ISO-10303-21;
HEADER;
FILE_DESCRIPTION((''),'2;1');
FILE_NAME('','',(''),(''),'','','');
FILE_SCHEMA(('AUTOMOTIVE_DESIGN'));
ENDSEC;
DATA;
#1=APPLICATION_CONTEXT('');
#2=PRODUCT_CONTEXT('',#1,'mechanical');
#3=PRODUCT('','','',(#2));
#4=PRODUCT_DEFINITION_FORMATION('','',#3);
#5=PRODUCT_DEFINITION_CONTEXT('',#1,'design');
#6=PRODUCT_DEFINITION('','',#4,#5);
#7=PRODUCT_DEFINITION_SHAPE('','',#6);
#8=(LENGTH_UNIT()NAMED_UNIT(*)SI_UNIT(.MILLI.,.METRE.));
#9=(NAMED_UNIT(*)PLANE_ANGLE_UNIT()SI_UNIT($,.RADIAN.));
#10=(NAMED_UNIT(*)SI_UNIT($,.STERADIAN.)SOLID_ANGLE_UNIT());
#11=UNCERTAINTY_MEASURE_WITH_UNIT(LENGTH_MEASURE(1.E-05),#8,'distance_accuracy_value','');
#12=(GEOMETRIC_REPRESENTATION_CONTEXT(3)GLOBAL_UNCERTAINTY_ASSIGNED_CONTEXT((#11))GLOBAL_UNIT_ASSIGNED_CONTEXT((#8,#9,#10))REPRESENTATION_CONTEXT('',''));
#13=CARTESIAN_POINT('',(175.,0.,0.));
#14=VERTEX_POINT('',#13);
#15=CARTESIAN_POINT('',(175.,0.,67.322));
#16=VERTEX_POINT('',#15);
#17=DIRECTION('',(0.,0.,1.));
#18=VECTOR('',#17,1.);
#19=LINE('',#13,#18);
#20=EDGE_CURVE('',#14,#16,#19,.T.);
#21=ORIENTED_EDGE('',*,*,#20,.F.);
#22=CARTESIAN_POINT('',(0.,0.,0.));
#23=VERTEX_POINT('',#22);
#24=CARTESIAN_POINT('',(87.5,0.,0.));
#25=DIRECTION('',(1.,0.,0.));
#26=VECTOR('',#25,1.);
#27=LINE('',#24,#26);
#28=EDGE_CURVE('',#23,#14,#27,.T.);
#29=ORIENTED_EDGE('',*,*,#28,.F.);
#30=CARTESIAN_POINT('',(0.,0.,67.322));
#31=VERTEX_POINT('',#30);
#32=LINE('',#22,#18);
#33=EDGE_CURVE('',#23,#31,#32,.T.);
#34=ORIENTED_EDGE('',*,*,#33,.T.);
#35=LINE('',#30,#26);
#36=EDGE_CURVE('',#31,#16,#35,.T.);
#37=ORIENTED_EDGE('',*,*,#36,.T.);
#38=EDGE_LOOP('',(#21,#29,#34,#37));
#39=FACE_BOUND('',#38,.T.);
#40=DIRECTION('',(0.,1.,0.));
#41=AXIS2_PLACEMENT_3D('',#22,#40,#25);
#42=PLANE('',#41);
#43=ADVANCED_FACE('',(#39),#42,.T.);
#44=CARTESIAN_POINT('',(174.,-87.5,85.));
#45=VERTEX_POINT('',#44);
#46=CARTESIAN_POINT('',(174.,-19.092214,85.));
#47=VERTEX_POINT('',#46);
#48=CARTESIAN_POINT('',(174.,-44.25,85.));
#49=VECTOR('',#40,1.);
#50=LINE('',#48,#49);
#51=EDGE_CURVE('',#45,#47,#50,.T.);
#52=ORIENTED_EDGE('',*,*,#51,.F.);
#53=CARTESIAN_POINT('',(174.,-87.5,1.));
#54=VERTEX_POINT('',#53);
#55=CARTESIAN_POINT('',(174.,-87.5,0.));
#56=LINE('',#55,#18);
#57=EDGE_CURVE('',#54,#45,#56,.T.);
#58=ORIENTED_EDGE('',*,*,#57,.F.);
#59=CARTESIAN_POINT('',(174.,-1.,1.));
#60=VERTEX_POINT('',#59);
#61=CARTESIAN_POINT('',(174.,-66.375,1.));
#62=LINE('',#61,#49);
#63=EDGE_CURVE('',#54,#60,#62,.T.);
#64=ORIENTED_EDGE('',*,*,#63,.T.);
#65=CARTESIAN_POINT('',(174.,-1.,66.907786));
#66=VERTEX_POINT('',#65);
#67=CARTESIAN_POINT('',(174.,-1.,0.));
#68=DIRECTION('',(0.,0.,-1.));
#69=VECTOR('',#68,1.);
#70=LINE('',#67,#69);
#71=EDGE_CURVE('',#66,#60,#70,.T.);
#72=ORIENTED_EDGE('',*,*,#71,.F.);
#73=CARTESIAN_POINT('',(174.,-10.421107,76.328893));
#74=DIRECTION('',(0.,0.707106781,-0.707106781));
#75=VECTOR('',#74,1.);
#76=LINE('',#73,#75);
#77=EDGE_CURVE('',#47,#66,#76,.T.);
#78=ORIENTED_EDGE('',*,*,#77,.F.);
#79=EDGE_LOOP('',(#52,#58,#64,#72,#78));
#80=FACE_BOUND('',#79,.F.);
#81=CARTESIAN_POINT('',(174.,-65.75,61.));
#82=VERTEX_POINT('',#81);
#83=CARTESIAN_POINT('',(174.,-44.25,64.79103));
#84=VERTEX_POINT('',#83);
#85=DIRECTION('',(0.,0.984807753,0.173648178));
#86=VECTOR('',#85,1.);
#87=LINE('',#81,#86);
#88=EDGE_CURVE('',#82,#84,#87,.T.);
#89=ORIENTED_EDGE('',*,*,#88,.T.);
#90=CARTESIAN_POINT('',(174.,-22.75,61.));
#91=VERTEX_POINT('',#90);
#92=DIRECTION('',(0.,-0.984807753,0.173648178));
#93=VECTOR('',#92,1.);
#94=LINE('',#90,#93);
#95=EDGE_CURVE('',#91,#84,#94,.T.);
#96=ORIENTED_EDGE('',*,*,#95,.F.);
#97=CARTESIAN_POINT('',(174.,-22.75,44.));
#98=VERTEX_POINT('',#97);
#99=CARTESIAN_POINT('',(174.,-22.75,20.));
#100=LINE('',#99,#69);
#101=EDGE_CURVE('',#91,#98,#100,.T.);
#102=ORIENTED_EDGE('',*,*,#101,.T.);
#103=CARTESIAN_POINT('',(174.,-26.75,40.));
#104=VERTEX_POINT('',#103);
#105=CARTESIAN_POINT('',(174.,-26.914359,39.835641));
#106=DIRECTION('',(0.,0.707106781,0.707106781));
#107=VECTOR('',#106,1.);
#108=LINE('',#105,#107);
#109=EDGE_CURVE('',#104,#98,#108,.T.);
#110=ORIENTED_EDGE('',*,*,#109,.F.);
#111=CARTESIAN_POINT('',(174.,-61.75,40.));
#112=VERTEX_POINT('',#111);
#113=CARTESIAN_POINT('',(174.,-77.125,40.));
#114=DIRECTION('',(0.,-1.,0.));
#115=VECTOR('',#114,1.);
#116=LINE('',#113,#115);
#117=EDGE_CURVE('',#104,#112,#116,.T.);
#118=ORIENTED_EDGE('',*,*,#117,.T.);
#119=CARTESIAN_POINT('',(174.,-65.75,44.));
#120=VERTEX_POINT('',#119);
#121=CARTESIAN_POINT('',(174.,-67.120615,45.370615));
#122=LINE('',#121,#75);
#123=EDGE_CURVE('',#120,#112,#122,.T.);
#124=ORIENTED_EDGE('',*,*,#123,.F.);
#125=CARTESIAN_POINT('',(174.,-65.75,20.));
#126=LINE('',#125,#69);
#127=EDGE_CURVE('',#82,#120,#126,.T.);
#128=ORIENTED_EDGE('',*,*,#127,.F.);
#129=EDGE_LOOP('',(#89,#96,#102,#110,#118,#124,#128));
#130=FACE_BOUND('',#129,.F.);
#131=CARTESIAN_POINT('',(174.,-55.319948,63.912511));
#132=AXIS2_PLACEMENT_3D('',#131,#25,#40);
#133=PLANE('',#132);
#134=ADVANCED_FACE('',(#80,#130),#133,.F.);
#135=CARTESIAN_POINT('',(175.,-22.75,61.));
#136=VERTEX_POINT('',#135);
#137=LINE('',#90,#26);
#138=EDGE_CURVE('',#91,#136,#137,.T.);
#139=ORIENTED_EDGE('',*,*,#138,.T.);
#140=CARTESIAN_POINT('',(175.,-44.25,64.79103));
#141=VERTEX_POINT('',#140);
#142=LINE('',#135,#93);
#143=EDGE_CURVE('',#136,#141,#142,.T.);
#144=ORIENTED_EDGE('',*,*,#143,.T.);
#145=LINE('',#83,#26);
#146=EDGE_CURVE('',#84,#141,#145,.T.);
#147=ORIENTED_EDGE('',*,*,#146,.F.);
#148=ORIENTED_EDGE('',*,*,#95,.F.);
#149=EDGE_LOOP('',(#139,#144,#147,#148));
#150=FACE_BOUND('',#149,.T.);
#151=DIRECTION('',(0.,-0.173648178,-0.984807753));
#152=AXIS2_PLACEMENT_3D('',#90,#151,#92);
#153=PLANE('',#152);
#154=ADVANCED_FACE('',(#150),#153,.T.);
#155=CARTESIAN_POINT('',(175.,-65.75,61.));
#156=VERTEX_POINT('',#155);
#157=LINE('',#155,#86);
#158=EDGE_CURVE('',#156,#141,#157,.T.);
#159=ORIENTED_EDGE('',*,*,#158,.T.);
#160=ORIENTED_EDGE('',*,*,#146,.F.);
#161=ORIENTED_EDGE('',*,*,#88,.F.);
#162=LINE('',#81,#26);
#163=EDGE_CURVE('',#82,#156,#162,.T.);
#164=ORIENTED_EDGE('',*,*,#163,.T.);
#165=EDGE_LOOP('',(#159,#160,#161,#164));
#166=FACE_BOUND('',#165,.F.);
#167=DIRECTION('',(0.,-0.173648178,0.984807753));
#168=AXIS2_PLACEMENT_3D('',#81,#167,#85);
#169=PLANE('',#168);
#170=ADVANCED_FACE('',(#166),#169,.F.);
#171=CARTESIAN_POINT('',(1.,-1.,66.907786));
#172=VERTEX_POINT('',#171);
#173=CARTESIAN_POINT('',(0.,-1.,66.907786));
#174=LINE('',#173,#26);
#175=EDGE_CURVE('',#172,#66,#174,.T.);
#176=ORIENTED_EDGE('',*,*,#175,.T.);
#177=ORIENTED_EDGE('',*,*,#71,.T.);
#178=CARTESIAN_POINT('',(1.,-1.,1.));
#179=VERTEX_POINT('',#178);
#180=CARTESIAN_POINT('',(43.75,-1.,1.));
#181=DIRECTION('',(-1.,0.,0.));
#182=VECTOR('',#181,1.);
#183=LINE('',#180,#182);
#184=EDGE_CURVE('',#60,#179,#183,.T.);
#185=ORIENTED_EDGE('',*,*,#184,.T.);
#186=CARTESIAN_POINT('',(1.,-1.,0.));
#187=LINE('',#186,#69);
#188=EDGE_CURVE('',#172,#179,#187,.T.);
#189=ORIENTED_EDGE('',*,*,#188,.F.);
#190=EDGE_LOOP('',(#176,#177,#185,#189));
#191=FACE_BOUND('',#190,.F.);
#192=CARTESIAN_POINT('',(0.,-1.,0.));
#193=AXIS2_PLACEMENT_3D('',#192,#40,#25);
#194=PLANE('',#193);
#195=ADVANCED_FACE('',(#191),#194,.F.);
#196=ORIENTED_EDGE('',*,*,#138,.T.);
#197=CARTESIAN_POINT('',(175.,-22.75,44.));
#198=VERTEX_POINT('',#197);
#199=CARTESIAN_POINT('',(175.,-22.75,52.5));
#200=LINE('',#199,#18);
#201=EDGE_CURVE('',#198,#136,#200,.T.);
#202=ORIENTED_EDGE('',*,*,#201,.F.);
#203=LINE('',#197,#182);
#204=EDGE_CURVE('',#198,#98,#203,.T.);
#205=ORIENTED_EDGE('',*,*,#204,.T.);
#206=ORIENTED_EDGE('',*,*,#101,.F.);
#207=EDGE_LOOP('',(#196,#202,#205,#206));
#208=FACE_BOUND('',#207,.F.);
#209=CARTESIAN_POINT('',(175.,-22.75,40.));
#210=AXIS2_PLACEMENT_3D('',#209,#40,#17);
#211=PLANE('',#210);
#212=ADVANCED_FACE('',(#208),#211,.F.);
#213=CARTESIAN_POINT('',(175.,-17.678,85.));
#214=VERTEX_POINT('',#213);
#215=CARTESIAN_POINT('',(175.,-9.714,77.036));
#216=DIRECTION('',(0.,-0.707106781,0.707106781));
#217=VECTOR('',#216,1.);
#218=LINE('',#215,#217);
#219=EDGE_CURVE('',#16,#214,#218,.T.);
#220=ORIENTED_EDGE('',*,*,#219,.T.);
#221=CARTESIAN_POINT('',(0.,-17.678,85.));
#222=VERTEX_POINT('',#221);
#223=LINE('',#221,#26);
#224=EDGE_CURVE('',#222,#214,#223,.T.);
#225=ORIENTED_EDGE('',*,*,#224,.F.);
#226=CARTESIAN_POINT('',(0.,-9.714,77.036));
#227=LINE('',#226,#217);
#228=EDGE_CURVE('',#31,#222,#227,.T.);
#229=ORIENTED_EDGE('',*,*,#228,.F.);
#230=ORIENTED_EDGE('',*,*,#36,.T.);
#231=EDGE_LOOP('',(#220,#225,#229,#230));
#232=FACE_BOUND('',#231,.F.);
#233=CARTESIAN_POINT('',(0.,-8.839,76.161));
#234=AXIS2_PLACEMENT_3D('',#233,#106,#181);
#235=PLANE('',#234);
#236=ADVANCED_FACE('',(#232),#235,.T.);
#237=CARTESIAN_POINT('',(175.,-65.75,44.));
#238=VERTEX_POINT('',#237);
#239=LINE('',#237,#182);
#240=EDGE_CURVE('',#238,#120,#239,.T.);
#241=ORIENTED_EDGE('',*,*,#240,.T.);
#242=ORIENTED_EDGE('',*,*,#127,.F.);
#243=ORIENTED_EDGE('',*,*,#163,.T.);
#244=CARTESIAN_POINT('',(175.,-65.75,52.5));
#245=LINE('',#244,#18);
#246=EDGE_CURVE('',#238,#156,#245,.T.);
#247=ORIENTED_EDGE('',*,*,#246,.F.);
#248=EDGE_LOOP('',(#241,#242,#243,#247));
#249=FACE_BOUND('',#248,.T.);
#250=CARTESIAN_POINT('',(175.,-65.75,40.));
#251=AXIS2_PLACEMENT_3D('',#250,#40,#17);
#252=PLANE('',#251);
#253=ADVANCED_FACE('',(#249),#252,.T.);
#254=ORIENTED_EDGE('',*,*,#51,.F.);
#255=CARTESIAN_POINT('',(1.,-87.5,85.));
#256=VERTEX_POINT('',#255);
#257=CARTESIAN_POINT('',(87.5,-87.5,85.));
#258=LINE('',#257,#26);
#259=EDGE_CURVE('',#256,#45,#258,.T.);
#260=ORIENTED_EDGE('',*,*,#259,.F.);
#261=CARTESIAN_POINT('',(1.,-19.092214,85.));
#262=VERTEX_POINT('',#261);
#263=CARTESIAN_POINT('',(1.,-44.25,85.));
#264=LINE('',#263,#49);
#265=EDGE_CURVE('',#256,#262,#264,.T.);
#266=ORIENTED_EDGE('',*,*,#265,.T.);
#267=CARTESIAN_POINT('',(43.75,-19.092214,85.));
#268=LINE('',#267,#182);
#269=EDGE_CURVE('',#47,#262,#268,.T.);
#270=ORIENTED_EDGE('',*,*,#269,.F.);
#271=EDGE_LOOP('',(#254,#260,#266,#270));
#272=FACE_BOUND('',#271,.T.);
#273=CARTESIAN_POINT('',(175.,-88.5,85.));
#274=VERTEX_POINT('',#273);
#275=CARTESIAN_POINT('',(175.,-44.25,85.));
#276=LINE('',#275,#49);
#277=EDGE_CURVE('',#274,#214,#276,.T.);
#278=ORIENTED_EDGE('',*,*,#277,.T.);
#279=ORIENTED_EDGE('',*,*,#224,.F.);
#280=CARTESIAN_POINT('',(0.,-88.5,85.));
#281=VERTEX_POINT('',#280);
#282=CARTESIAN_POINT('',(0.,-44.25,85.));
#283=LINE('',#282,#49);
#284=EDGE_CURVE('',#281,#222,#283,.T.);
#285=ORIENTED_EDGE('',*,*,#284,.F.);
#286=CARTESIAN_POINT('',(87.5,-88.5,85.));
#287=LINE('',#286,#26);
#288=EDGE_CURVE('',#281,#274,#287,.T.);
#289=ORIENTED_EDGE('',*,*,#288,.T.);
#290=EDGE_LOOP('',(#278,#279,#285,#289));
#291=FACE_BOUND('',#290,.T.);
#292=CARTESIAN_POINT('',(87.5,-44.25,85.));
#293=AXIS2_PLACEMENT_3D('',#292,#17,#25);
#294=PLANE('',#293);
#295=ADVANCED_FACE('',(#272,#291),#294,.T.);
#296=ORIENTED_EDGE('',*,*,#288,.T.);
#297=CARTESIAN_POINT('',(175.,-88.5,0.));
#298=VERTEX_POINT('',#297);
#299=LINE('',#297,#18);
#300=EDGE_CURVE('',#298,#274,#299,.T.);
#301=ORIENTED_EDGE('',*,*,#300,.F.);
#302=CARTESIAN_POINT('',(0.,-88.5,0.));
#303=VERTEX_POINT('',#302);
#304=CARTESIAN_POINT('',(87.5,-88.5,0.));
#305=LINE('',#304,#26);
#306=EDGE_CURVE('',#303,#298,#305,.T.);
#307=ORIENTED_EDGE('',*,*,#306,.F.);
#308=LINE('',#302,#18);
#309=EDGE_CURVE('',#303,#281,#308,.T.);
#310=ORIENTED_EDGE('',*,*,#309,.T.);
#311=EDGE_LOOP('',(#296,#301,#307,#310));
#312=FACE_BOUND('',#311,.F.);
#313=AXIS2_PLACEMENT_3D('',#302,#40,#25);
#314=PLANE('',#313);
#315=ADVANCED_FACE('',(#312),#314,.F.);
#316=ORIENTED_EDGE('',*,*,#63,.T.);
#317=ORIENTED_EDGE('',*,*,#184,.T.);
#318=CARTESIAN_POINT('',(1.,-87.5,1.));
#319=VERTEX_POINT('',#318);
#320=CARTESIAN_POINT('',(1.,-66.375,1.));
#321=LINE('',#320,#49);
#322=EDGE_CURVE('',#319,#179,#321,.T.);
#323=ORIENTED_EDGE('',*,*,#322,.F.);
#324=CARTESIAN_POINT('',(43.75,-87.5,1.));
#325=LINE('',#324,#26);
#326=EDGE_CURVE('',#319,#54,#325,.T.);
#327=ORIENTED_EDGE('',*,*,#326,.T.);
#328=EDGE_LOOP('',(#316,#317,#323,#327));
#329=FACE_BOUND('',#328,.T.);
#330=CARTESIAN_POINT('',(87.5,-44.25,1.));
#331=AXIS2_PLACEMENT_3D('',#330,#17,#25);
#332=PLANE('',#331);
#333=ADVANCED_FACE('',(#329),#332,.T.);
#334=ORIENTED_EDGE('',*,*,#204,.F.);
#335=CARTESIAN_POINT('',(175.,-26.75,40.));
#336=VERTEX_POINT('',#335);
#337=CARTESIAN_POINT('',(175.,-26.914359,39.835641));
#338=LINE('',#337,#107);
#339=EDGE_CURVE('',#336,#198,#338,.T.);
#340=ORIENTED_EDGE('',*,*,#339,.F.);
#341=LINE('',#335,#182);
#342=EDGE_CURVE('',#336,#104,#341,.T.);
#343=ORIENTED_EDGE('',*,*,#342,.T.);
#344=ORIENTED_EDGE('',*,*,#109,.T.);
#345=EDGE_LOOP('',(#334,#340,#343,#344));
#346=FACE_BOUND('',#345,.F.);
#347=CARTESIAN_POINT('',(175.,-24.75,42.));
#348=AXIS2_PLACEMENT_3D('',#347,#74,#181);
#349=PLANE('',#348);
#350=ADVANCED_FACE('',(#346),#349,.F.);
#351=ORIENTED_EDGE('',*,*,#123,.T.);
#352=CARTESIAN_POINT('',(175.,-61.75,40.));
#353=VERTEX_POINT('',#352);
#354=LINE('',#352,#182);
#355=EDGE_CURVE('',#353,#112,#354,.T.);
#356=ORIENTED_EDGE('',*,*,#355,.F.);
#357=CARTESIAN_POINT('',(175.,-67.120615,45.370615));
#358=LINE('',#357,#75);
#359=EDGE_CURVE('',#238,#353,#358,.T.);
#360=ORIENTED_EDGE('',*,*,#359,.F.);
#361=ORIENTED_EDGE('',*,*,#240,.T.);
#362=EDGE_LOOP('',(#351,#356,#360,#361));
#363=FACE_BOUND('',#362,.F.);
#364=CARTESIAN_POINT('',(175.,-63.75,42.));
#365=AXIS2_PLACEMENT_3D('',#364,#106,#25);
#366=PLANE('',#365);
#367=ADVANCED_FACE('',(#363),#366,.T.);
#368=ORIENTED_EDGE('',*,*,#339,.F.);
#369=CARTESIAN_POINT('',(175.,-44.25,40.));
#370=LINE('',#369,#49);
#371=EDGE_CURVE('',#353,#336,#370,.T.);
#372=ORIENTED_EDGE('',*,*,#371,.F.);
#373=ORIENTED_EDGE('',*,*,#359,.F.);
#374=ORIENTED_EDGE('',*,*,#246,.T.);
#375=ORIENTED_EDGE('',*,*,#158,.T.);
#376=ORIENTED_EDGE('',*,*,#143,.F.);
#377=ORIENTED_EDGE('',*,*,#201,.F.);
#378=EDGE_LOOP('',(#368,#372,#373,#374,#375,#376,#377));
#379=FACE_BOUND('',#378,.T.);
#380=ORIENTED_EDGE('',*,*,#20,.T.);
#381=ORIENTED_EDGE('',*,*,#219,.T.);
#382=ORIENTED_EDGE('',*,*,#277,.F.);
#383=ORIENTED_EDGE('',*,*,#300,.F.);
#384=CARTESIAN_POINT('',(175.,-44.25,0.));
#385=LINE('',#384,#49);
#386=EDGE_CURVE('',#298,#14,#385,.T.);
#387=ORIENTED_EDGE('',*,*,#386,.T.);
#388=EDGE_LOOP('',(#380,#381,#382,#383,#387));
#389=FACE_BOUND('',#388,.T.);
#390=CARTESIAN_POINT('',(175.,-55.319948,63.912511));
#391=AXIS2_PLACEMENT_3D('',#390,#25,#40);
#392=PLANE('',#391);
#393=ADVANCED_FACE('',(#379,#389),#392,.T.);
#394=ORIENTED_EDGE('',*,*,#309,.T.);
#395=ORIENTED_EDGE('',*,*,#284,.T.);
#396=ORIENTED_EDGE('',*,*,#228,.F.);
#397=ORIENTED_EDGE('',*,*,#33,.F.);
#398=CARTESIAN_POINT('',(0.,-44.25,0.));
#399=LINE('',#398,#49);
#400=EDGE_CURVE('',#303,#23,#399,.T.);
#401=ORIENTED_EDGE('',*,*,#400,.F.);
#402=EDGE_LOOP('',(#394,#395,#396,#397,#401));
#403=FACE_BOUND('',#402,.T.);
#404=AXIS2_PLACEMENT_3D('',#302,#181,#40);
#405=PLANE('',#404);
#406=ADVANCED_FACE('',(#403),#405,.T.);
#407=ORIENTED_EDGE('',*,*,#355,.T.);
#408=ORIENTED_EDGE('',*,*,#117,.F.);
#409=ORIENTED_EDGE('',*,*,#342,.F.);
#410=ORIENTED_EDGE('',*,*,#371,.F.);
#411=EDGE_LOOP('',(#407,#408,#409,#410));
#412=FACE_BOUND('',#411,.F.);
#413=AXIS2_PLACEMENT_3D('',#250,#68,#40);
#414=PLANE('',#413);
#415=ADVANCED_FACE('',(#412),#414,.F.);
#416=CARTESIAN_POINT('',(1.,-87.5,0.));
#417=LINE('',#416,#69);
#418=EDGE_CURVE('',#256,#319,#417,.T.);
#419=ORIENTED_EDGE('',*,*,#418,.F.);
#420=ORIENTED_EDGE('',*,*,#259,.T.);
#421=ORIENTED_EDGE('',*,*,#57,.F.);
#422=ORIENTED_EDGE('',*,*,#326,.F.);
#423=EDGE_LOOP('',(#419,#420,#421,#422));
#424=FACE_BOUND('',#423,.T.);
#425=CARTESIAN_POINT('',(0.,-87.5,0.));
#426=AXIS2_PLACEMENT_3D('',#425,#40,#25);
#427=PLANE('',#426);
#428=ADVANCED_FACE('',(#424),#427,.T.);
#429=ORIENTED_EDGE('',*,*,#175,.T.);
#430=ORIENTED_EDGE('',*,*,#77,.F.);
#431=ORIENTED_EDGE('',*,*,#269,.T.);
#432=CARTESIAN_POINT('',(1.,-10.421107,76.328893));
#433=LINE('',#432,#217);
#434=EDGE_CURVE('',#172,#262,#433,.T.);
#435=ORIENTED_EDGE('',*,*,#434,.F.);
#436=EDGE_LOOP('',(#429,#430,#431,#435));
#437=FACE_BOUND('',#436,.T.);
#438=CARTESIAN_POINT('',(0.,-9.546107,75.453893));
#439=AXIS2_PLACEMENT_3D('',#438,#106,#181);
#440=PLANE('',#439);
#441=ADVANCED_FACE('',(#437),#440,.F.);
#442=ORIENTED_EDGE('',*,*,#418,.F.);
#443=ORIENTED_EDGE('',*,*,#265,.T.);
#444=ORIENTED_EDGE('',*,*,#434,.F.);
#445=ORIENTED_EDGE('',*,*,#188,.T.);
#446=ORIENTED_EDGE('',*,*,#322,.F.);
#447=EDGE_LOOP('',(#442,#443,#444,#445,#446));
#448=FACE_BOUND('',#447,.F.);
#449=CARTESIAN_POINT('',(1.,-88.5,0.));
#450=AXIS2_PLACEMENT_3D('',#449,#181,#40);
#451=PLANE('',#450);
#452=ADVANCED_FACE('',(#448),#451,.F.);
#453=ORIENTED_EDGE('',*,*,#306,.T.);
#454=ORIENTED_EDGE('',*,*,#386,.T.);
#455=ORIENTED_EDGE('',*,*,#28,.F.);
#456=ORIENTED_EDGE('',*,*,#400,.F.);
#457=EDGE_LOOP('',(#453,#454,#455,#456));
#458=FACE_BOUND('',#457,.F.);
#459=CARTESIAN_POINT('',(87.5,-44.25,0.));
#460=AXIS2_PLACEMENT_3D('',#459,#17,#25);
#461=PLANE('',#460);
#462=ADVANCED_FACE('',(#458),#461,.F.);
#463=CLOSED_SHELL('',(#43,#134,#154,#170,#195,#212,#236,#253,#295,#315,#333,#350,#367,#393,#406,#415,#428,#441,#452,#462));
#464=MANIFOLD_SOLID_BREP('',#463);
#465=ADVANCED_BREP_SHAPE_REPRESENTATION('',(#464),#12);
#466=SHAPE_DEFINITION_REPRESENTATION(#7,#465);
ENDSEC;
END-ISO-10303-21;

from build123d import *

# Parameters (mm, degrees)
F0_W        = 175
F0_H        = 88.5
F1_DEPTH    = 85
F2_SIZE     = 17.678
F3_T        = -1
F4_W        = 43
F4_H        = 25
F5_DEPTH    = 2
F6_T1_DEPTH = 1
F7_SIZE     = 4


# Not quite as in the source:
# - a fillet or chamfer that OpenCascade refuses, or shapes differently, is made with other operations: its cross-section is extruded or revolved along the edge and cut away or added


with BuildPart() as f1:
    # F0 (on Top) → F1 (new body)
    with BuildSketch(Plane.XY):
        with Locations((87.5, -44.25)):
            Rectangle(F0_W, F0_H)
    extrude(amount=F1_DEPTH)

    # F2
    f2_edges = [f1.edges().sort_by_distance(p)[0] for p in [
        (87.5, 0, 85),
    ]]
    chamfer(f2_edges, length=F2_SIZE)

    # F3
    f3_openings = [f1.faces().sort_by_distance(p)[0] for p in [
        (87.5, -53.089, 85),
    ]]
    offset(amount=F3_T, openings=f3_openings)

    # F4 (on face) → F5 (cut)
    with BuildSketch(Plane.YZ.offset(175)):
        with Locations((-44.25, 52.5)):
            Rectangle(F4_W, F4_H)
    extrude(amount=-F5_DEPTH, mode=Mode.SUBTRACT)

    # F6: chamfer of 4 x 22.6851272785 on 2 edges, made by hand

    # F6_s2 → F6_t1 (join)
    with BuildSketch(Plane.YZ.offset(174)):
        Polygon((-65.75, 61), (-43.0648727215, 65), (-65.75, 65), align=None)
        Polygon((-22.75, 61), (-45.4351272785, 65), (-22.75, 65), align=None)
    extrude(amount=F6_T1_DEPTH)

    # F7
    f7_edges = [f1.edges().sort_by_distance(p)[0] for p in [
        (174.5, -65.75, 40),
        (174.5, -22.75, 40),
    ]]
    chamfer(f7_edges, length=F7_SIZE)


solid = f1.part
